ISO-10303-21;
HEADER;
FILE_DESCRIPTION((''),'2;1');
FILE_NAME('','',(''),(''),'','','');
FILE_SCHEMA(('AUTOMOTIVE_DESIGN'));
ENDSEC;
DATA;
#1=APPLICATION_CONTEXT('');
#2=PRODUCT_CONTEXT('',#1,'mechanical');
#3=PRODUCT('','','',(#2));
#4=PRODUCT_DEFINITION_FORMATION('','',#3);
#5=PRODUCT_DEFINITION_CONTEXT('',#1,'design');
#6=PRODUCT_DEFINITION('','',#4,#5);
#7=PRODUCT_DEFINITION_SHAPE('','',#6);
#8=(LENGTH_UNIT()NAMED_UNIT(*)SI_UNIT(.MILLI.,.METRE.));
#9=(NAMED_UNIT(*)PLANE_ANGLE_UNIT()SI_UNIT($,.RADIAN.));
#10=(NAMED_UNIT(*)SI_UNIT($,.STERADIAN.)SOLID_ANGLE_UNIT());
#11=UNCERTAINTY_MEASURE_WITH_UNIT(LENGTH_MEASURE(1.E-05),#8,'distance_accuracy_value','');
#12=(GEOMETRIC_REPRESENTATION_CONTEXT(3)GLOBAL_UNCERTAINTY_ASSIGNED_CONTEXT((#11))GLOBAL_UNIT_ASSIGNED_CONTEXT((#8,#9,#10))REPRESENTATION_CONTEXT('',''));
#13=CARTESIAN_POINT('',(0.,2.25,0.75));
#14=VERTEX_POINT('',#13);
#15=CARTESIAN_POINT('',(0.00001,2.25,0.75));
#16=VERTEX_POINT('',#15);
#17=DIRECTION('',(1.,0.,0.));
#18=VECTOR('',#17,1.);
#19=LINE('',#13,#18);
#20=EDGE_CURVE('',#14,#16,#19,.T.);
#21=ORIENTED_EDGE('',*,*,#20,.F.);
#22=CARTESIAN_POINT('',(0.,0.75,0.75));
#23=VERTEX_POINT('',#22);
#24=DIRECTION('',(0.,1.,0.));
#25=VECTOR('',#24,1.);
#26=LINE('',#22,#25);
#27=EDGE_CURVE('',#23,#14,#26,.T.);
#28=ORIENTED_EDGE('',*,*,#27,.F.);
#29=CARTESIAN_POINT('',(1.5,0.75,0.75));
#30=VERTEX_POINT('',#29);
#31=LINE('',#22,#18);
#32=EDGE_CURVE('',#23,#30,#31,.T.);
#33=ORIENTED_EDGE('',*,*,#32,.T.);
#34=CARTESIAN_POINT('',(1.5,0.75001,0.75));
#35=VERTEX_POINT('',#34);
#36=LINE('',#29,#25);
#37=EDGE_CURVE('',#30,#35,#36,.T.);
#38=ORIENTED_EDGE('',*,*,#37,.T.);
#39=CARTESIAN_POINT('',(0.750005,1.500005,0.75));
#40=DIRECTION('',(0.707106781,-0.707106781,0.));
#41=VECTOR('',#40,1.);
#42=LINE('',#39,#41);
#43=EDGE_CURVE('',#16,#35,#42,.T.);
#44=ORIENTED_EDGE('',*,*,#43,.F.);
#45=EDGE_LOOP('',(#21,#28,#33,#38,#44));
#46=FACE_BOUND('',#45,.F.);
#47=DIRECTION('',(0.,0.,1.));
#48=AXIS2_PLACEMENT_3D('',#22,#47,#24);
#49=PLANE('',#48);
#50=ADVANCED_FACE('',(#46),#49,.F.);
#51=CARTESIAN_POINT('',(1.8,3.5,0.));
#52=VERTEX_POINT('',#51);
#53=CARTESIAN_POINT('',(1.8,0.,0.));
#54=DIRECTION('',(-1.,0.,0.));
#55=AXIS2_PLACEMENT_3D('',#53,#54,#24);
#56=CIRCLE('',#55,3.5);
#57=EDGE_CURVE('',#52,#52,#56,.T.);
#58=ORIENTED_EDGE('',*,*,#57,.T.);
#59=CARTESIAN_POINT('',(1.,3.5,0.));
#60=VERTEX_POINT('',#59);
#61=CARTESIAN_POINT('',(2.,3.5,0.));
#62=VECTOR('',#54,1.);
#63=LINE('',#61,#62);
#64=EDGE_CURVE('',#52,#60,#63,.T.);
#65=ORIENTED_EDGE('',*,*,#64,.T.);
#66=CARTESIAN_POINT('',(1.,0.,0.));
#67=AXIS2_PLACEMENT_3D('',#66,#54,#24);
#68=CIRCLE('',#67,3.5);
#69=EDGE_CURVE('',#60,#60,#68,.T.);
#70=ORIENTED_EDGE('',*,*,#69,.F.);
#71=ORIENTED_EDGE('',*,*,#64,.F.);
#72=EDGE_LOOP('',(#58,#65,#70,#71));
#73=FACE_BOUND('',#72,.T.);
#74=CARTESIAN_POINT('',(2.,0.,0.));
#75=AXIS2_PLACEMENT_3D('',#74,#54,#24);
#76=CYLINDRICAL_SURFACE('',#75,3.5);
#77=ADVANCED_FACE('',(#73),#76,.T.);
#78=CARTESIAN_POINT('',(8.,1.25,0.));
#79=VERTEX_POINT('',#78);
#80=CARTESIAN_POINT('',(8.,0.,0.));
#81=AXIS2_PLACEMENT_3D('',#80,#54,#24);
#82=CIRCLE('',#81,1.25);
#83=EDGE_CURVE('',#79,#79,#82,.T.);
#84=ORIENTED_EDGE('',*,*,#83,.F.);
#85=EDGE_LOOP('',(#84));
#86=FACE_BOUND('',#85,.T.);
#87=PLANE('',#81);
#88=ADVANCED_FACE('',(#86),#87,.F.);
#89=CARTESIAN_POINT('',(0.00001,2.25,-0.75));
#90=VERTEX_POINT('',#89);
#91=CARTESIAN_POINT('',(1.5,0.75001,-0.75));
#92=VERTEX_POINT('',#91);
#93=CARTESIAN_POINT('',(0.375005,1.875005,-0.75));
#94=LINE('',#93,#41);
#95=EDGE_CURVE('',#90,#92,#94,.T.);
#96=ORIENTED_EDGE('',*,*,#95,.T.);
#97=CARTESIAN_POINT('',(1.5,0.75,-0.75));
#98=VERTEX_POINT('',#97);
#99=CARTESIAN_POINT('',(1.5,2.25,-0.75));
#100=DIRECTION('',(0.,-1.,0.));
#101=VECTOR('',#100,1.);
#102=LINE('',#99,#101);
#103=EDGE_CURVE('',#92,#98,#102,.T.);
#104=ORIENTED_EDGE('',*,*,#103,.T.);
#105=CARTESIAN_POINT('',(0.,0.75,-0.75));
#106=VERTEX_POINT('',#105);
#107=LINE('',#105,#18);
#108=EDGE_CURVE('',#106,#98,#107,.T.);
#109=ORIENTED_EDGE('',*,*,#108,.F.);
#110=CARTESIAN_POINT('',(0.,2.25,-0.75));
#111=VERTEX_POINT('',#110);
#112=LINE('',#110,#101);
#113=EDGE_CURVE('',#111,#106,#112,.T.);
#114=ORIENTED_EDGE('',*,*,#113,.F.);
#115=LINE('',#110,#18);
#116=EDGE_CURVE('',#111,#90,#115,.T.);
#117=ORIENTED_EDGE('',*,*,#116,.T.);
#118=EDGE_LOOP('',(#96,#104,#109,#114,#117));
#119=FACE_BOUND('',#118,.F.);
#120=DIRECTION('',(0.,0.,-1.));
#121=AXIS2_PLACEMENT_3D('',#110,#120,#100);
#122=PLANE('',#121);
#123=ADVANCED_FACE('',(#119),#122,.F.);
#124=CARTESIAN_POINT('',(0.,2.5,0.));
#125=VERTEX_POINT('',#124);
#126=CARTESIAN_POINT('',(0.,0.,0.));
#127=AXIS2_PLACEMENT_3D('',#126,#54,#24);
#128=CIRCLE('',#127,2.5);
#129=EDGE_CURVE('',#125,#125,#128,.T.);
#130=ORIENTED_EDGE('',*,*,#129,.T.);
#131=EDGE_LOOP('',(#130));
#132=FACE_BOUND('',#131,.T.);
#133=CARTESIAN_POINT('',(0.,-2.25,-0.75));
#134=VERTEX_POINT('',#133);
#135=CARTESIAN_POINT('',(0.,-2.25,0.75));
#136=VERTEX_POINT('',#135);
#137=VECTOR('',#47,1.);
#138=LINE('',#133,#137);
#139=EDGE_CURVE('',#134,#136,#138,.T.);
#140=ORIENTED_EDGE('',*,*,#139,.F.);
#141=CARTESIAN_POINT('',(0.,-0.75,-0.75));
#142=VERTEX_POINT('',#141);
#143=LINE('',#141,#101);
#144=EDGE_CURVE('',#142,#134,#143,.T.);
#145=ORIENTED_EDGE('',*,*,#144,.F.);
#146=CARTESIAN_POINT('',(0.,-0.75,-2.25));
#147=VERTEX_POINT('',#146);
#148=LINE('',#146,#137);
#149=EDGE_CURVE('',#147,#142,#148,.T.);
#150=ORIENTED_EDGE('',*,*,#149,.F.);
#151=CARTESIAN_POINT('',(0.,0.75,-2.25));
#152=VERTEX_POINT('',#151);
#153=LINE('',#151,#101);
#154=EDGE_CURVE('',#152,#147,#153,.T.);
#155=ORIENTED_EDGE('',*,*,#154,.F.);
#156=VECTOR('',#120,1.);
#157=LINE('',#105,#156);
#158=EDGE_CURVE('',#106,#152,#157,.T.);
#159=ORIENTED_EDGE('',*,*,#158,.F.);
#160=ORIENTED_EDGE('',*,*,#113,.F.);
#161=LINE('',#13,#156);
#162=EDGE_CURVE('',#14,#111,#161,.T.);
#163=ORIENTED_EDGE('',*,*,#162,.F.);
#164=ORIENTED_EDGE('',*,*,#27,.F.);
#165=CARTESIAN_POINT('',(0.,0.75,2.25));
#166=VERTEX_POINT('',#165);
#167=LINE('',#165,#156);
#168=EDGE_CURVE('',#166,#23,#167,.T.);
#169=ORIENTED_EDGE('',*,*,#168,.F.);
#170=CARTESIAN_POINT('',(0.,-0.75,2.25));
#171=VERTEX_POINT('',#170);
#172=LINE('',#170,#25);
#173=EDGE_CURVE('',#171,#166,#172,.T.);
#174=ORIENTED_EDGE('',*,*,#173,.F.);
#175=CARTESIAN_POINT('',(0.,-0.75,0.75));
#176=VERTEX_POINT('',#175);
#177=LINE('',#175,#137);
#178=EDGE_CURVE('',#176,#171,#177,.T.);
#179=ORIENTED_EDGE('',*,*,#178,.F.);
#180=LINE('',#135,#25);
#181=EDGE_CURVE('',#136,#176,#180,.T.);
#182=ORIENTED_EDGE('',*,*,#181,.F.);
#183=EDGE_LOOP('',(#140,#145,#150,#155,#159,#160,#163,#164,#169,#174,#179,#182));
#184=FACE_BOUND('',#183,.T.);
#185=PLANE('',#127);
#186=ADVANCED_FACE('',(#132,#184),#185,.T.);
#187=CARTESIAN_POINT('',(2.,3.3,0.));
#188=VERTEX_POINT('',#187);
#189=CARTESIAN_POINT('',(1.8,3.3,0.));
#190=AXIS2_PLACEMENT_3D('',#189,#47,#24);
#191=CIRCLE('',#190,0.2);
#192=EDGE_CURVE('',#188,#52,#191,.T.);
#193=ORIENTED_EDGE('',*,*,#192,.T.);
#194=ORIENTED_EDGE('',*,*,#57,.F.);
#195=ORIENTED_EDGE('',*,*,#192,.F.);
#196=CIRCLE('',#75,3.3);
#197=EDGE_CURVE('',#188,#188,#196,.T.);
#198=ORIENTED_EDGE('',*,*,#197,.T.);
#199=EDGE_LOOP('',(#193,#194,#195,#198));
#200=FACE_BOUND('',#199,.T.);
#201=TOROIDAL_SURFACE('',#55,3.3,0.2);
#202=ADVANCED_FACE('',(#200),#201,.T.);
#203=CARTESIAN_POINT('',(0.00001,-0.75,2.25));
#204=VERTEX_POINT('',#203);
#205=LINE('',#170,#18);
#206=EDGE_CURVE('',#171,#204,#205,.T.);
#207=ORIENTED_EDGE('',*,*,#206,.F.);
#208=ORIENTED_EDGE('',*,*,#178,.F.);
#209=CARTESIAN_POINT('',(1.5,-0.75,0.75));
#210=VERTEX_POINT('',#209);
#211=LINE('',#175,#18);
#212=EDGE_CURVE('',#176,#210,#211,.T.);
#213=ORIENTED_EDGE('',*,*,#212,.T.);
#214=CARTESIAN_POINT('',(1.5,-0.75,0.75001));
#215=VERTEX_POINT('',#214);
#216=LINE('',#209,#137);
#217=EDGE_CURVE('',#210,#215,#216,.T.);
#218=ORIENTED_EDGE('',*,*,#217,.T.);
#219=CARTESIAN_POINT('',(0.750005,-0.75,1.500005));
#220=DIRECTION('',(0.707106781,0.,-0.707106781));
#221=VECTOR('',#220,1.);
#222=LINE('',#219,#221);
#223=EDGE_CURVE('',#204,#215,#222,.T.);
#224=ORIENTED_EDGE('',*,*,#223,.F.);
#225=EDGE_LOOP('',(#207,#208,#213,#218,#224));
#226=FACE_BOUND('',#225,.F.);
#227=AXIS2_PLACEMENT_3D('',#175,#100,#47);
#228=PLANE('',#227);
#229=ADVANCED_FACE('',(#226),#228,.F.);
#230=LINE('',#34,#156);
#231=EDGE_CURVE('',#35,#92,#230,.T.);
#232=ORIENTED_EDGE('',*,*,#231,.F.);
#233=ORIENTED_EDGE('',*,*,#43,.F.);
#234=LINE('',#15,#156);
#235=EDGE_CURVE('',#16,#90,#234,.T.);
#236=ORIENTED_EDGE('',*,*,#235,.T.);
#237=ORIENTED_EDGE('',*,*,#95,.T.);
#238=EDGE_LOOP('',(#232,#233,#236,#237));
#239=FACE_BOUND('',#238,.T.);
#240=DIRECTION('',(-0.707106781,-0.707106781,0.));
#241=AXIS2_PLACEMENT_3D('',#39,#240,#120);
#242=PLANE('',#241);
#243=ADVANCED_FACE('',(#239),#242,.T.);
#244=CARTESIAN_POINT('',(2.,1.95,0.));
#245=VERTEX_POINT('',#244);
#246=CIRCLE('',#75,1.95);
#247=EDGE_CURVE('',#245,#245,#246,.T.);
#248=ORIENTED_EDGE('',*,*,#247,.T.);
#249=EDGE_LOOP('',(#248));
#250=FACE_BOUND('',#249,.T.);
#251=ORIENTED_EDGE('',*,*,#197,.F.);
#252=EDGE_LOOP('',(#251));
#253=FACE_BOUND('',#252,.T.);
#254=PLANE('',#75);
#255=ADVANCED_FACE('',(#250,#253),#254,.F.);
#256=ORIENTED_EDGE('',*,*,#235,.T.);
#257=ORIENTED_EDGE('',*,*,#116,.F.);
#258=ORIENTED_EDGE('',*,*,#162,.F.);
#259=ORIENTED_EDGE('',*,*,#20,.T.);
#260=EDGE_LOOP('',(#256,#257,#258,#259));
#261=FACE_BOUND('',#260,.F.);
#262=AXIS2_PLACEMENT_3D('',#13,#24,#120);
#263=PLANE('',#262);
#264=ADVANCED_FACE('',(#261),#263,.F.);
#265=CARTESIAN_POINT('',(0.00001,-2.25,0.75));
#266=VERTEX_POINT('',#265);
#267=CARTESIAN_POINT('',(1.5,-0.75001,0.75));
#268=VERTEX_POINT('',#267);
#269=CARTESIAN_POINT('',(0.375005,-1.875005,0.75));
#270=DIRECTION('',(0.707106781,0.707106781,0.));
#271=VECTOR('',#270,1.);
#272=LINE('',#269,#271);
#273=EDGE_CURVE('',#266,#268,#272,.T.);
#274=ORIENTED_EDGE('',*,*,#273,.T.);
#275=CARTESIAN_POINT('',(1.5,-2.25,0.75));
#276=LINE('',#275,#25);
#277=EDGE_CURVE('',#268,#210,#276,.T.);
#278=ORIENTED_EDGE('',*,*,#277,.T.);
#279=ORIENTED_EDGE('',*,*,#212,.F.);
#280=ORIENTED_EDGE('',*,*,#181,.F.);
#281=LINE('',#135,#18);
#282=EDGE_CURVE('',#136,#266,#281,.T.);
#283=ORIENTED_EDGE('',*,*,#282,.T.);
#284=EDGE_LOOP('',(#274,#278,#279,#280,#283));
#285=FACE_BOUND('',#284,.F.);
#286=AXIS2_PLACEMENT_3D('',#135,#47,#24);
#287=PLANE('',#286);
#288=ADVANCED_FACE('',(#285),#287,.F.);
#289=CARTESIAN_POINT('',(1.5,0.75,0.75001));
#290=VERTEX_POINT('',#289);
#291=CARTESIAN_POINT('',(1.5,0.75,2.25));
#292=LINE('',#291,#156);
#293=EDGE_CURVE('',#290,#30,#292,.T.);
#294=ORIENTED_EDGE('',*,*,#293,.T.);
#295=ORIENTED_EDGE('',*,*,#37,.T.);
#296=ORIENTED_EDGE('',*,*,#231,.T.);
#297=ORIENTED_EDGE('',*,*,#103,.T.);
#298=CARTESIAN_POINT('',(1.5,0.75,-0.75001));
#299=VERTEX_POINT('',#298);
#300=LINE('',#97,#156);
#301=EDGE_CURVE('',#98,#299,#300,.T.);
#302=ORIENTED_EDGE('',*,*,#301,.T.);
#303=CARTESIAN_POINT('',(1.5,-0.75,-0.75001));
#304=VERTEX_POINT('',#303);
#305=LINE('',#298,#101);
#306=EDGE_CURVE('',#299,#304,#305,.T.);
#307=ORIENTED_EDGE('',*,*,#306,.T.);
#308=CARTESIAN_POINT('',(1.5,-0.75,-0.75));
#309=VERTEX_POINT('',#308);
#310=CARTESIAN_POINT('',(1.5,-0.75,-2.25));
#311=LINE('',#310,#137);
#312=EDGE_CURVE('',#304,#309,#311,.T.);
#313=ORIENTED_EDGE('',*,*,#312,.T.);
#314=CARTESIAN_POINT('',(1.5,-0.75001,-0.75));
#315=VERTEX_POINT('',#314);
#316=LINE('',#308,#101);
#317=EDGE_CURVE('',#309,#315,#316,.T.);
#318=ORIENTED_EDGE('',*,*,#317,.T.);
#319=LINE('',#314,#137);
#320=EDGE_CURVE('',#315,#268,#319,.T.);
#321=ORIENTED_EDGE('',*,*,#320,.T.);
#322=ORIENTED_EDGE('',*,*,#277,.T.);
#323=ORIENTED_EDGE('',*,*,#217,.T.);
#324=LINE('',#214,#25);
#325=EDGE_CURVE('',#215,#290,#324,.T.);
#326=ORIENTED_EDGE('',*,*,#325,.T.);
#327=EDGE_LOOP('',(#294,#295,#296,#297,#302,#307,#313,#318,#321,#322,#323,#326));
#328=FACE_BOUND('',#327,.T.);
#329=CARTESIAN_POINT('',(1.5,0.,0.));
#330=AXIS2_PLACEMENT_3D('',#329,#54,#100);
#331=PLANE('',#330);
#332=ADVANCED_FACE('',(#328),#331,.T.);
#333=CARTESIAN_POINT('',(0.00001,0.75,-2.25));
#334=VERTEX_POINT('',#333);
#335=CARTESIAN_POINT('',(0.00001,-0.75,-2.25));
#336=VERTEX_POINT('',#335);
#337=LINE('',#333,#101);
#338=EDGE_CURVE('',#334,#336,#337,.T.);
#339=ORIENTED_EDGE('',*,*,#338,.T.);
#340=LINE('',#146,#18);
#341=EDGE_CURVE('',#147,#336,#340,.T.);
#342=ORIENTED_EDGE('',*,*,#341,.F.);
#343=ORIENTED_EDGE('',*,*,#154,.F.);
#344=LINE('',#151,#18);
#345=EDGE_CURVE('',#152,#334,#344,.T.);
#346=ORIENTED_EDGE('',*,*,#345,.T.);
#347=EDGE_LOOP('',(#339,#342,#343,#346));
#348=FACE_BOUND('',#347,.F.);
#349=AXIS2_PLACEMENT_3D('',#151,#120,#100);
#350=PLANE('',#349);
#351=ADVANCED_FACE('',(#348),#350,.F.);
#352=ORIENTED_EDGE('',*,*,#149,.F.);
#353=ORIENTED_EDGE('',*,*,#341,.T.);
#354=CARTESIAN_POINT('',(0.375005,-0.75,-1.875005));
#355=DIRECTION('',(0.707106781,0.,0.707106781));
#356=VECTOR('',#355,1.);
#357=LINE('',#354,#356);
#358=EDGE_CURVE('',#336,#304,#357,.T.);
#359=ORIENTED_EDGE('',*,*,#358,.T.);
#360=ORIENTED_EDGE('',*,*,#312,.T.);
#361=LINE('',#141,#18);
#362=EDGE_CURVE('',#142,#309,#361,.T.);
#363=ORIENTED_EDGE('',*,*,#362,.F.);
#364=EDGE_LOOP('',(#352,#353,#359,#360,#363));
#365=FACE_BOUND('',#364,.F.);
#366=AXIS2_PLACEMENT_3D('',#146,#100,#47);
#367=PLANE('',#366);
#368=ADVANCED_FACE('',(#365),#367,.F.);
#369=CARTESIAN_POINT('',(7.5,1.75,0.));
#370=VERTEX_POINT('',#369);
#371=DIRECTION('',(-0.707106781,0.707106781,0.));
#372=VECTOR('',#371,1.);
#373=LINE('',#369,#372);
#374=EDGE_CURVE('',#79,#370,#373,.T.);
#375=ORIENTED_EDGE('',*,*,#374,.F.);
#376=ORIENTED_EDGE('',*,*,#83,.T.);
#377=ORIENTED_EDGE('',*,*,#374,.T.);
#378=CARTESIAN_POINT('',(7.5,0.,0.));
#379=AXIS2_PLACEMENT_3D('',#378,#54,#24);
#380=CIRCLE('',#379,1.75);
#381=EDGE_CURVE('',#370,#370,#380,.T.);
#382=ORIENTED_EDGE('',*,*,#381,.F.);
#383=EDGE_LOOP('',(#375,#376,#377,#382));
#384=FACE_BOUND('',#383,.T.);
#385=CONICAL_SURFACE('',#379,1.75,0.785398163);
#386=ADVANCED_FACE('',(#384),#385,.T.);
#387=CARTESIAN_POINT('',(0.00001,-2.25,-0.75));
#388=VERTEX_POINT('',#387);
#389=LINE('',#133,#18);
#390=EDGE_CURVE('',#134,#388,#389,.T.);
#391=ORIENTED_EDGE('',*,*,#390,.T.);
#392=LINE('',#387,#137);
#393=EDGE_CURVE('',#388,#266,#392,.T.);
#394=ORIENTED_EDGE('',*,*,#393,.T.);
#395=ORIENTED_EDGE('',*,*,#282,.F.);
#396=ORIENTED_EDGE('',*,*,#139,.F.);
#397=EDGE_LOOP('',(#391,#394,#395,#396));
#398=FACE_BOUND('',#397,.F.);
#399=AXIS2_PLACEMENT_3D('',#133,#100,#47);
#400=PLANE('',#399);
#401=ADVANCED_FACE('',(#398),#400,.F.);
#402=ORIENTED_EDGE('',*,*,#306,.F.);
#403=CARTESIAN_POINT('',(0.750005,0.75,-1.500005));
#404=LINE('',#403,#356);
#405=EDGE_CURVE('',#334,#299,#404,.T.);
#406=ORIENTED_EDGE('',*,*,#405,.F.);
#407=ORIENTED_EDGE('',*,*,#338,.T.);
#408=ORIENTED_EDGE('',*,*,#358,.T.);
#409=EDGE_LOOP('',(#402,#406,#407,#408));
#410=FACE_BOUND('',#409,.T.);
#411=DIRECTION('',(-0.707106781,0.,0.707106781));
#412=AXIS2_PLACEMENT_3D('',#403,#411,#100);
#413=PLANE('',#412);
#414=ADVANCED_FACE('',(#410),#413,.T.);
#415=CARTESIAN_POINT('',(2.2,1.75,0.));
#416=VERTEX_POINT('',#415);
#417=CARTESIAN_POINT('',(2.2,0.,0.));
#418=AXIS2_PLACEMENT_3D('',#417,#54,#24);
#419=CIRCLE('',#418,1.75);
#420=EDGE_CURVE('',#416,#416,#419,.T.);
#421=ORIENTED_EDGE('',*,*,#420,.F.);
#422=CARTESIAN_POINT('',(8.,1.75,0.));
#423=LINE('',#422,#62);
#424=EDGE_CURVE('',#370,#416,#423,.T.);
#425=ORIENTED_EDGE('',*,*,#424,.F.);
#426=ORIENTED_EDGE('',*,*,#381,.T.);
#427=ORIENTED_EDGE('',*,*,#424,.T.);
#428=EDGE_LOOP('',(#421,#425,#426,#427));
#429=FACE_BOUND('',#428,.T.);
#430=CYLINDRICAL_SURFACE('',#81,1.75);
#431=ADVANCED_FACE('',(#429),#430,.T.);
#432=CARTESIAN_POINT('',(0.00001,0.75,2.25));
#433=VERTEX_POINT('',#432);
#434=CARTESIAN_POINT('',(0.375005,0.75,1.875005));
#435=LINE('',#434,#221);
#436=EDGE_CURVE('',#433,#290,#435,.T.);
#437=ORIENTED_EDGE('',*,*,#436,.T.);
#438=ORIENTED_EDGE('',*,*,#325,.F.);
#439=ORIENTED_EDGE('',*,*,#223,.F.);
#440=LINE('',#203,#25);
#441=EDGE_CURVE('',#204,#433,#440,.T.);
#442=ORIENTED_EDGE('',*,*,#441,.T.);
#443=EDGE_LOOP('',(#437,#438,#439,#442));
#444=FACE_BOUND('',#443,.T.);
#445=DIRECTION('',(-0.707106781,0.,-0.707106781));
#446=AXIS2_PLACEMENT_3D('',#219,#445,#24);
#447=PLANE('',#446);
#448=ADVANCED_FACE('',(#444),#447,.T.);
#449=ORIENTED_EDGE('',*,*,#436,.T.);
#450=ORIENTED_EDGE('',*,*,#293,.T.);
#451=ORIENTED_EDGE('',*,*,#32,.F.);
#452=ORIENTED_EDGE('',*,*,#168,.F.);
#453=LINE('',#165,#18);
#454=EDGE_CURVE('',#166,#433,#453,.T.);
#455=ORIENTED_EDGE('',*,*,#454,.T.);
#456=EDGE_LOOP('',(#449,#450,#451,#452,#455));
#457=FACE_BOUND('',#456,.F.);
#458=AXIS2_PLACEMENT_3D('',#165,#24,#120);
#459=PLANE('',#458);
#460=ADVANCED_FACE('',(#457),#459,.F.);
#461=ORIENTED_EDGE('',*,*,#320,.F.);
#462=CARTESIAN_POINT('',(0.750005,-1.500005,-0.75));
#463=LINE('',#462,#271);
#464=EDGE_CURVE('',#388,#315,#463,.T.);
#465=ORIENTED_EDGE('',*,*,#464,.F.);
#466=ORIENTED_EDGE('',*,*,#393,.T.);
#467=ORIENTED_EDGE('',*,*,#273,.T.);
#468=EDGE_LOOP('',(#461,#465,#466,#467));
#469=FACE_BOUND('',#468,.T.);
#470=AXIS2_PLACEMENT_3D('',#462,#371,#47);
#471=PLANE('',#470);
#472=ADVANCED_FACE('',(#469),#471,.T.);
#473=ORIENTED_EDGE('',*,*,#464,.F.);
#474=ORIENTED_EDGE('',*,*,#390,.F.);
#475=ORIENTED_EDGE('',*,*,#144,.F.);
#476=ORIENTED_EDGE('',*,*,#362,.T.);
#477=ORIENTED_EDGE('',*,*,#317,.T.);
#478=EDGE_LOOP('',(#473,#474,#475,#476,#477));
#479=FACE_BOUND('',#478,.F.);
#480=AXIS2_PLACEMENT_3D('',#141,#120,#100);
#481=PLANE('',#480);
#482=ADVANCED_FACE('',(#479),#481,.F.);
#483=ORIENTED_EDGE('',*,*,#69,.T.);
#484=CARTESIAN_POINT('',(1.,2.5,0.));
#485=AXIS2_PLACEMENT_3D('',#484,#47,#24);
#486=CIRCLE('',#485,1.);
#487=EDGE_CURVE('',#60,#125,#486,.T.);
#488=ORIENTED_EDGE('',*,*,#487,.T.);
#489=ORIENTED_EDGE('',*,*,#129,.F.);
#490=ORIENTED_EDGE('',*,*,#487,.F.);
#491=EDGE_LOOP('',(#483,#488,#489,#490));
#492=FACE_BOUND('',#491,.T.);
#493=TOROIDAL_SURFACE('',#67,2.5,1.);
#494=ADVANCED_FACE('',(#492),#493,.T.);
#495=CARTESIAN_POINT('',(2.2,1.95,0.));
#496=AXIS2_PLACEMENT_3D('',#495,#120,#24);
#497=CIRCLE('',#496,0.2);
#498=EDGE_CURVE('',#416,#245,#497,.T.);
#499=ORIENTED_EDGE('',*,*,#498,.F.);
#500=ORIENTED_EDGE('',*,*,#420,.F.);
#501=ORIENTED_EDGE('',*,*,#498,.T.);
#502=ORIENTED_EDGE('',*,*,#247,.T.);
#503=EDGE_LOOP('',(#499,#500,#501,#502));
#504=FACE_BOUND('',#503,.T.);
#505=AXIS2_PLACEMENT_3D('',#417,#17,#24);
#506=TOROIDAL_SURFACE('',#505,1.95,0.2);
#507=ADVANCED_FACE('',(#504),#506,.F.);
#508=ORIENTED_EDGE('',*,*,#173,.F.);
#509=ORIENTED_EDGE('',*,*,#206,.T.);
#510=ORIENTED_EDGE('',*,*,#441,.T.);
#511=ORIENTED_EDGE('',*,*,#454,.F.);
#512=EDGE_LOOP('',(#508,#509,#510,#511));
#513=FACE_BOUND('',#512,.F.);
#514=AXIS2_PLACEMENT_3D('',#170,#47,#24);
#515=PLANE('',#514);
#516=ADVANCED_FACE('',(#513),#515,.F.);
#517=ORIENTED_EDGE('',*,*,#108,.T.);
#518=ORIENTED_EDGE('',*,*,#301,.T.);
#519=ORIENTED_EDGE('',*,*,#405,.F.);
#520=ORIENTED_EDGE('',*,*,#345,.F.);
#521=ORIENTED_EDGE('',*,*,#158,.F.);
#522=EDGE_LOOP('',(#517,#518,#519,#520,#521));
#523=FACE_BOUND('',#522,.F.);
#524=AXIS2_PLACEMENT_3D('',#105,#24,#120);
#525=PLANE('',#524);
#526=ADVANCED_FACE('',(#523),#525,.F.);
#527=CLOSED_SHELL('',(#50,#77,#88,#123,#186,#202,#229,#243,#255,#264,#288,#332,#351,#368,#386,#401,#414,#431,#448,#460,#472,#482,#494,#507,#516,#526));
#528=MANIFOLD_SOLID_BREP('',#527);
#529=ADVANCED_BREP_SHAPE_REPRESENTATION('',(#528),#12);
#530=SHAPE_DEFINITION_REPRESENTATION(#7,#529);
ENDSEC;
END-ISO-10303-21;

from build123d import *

# Parameters (mm, degrees)
F2_SIZE  = 0.5
F3_R     = 0.2
F4_R     = 0.2
F5_R     = 1
F7_DEPTH = 1.5
F8_SIZE  = 1.49999


# Not quite as in the source:
# - a fillet or chamfer is up to 0.001 mm smaller than in the source, because OpenCascade refuses the exact size


with BuildPart() as f1:
    # F0 (on Top) → F1 (revolve)
    with BuildSketch(Plane.XY):
        Polygon((0, 3.5), (0, 0), (8, 0), (8, 1.75), (2, 1.75), (2, 3.5), align=None)
    revolve(axis=Axis((4, 0, 0), (-1, 0, 0)))

    # F2
    f2_edges = [f1.edges().sort_by_distance(p)[0] for p in [
        (8, -1.75, 0),
    ]]
    chamfer(f2_edges, length=F2_SIZE)

    # F3
    f3_edges = [f1.edges().sort_by_distance(p)[0] for p in [
        (2, -1.75, 0),
    ]]
    fillet(f3_edges, radius=F3_R)

    # F4
    f4_edges = [f1.edges().sort_by_distance(p)[0] for p in [
        (2, -3.5, 0),
    ]]
    fillet(f4_edges, radius=F4_R)

    # F5
    f5_edges = [f1.edges().sort_by_distance(p)[0] for p in [
        (0, -3.5, 0),
    ]]
    fillet(f5_edges, radius=F5_R)

    # F6 (on face) → F7 (cut)
    with BuildSketch(Plane(origin=(0, 0, 0), x_dir=(0, -1, 0), z_dir=(-1, 0, 0))):
        Polygon((-0.75, 2.25), (-0.75, 0.75), (-2.25, 0.75), (-2.25, -0.75), (-0.75, -0.75), (-0.75, -2.25), (0.75, -2.25), (0.75, -0.75), (2.25, -0.75), (2.25, 0.75), (0.75, 0.75), (0.75, 2.25), align=None)
    extrude(amount=-F7_DEPTH, mode=Mode.SUBTRACT)

    # F8 (size 1.5 in the source; OpenCascade refuses exactly that, so slightly less here)
    f8_edges = [f1.edges().sort_by_distance(p)[0] for p in [
        (1.5, 2.25, 0),
        (1.5, 0, 2.25),
        (1.5, 0, -2.25),
        (1.5, -2.25, 0),
    ]]
    chamfer(f8_edges, length=F8_SIZE)


solid = f1.part
